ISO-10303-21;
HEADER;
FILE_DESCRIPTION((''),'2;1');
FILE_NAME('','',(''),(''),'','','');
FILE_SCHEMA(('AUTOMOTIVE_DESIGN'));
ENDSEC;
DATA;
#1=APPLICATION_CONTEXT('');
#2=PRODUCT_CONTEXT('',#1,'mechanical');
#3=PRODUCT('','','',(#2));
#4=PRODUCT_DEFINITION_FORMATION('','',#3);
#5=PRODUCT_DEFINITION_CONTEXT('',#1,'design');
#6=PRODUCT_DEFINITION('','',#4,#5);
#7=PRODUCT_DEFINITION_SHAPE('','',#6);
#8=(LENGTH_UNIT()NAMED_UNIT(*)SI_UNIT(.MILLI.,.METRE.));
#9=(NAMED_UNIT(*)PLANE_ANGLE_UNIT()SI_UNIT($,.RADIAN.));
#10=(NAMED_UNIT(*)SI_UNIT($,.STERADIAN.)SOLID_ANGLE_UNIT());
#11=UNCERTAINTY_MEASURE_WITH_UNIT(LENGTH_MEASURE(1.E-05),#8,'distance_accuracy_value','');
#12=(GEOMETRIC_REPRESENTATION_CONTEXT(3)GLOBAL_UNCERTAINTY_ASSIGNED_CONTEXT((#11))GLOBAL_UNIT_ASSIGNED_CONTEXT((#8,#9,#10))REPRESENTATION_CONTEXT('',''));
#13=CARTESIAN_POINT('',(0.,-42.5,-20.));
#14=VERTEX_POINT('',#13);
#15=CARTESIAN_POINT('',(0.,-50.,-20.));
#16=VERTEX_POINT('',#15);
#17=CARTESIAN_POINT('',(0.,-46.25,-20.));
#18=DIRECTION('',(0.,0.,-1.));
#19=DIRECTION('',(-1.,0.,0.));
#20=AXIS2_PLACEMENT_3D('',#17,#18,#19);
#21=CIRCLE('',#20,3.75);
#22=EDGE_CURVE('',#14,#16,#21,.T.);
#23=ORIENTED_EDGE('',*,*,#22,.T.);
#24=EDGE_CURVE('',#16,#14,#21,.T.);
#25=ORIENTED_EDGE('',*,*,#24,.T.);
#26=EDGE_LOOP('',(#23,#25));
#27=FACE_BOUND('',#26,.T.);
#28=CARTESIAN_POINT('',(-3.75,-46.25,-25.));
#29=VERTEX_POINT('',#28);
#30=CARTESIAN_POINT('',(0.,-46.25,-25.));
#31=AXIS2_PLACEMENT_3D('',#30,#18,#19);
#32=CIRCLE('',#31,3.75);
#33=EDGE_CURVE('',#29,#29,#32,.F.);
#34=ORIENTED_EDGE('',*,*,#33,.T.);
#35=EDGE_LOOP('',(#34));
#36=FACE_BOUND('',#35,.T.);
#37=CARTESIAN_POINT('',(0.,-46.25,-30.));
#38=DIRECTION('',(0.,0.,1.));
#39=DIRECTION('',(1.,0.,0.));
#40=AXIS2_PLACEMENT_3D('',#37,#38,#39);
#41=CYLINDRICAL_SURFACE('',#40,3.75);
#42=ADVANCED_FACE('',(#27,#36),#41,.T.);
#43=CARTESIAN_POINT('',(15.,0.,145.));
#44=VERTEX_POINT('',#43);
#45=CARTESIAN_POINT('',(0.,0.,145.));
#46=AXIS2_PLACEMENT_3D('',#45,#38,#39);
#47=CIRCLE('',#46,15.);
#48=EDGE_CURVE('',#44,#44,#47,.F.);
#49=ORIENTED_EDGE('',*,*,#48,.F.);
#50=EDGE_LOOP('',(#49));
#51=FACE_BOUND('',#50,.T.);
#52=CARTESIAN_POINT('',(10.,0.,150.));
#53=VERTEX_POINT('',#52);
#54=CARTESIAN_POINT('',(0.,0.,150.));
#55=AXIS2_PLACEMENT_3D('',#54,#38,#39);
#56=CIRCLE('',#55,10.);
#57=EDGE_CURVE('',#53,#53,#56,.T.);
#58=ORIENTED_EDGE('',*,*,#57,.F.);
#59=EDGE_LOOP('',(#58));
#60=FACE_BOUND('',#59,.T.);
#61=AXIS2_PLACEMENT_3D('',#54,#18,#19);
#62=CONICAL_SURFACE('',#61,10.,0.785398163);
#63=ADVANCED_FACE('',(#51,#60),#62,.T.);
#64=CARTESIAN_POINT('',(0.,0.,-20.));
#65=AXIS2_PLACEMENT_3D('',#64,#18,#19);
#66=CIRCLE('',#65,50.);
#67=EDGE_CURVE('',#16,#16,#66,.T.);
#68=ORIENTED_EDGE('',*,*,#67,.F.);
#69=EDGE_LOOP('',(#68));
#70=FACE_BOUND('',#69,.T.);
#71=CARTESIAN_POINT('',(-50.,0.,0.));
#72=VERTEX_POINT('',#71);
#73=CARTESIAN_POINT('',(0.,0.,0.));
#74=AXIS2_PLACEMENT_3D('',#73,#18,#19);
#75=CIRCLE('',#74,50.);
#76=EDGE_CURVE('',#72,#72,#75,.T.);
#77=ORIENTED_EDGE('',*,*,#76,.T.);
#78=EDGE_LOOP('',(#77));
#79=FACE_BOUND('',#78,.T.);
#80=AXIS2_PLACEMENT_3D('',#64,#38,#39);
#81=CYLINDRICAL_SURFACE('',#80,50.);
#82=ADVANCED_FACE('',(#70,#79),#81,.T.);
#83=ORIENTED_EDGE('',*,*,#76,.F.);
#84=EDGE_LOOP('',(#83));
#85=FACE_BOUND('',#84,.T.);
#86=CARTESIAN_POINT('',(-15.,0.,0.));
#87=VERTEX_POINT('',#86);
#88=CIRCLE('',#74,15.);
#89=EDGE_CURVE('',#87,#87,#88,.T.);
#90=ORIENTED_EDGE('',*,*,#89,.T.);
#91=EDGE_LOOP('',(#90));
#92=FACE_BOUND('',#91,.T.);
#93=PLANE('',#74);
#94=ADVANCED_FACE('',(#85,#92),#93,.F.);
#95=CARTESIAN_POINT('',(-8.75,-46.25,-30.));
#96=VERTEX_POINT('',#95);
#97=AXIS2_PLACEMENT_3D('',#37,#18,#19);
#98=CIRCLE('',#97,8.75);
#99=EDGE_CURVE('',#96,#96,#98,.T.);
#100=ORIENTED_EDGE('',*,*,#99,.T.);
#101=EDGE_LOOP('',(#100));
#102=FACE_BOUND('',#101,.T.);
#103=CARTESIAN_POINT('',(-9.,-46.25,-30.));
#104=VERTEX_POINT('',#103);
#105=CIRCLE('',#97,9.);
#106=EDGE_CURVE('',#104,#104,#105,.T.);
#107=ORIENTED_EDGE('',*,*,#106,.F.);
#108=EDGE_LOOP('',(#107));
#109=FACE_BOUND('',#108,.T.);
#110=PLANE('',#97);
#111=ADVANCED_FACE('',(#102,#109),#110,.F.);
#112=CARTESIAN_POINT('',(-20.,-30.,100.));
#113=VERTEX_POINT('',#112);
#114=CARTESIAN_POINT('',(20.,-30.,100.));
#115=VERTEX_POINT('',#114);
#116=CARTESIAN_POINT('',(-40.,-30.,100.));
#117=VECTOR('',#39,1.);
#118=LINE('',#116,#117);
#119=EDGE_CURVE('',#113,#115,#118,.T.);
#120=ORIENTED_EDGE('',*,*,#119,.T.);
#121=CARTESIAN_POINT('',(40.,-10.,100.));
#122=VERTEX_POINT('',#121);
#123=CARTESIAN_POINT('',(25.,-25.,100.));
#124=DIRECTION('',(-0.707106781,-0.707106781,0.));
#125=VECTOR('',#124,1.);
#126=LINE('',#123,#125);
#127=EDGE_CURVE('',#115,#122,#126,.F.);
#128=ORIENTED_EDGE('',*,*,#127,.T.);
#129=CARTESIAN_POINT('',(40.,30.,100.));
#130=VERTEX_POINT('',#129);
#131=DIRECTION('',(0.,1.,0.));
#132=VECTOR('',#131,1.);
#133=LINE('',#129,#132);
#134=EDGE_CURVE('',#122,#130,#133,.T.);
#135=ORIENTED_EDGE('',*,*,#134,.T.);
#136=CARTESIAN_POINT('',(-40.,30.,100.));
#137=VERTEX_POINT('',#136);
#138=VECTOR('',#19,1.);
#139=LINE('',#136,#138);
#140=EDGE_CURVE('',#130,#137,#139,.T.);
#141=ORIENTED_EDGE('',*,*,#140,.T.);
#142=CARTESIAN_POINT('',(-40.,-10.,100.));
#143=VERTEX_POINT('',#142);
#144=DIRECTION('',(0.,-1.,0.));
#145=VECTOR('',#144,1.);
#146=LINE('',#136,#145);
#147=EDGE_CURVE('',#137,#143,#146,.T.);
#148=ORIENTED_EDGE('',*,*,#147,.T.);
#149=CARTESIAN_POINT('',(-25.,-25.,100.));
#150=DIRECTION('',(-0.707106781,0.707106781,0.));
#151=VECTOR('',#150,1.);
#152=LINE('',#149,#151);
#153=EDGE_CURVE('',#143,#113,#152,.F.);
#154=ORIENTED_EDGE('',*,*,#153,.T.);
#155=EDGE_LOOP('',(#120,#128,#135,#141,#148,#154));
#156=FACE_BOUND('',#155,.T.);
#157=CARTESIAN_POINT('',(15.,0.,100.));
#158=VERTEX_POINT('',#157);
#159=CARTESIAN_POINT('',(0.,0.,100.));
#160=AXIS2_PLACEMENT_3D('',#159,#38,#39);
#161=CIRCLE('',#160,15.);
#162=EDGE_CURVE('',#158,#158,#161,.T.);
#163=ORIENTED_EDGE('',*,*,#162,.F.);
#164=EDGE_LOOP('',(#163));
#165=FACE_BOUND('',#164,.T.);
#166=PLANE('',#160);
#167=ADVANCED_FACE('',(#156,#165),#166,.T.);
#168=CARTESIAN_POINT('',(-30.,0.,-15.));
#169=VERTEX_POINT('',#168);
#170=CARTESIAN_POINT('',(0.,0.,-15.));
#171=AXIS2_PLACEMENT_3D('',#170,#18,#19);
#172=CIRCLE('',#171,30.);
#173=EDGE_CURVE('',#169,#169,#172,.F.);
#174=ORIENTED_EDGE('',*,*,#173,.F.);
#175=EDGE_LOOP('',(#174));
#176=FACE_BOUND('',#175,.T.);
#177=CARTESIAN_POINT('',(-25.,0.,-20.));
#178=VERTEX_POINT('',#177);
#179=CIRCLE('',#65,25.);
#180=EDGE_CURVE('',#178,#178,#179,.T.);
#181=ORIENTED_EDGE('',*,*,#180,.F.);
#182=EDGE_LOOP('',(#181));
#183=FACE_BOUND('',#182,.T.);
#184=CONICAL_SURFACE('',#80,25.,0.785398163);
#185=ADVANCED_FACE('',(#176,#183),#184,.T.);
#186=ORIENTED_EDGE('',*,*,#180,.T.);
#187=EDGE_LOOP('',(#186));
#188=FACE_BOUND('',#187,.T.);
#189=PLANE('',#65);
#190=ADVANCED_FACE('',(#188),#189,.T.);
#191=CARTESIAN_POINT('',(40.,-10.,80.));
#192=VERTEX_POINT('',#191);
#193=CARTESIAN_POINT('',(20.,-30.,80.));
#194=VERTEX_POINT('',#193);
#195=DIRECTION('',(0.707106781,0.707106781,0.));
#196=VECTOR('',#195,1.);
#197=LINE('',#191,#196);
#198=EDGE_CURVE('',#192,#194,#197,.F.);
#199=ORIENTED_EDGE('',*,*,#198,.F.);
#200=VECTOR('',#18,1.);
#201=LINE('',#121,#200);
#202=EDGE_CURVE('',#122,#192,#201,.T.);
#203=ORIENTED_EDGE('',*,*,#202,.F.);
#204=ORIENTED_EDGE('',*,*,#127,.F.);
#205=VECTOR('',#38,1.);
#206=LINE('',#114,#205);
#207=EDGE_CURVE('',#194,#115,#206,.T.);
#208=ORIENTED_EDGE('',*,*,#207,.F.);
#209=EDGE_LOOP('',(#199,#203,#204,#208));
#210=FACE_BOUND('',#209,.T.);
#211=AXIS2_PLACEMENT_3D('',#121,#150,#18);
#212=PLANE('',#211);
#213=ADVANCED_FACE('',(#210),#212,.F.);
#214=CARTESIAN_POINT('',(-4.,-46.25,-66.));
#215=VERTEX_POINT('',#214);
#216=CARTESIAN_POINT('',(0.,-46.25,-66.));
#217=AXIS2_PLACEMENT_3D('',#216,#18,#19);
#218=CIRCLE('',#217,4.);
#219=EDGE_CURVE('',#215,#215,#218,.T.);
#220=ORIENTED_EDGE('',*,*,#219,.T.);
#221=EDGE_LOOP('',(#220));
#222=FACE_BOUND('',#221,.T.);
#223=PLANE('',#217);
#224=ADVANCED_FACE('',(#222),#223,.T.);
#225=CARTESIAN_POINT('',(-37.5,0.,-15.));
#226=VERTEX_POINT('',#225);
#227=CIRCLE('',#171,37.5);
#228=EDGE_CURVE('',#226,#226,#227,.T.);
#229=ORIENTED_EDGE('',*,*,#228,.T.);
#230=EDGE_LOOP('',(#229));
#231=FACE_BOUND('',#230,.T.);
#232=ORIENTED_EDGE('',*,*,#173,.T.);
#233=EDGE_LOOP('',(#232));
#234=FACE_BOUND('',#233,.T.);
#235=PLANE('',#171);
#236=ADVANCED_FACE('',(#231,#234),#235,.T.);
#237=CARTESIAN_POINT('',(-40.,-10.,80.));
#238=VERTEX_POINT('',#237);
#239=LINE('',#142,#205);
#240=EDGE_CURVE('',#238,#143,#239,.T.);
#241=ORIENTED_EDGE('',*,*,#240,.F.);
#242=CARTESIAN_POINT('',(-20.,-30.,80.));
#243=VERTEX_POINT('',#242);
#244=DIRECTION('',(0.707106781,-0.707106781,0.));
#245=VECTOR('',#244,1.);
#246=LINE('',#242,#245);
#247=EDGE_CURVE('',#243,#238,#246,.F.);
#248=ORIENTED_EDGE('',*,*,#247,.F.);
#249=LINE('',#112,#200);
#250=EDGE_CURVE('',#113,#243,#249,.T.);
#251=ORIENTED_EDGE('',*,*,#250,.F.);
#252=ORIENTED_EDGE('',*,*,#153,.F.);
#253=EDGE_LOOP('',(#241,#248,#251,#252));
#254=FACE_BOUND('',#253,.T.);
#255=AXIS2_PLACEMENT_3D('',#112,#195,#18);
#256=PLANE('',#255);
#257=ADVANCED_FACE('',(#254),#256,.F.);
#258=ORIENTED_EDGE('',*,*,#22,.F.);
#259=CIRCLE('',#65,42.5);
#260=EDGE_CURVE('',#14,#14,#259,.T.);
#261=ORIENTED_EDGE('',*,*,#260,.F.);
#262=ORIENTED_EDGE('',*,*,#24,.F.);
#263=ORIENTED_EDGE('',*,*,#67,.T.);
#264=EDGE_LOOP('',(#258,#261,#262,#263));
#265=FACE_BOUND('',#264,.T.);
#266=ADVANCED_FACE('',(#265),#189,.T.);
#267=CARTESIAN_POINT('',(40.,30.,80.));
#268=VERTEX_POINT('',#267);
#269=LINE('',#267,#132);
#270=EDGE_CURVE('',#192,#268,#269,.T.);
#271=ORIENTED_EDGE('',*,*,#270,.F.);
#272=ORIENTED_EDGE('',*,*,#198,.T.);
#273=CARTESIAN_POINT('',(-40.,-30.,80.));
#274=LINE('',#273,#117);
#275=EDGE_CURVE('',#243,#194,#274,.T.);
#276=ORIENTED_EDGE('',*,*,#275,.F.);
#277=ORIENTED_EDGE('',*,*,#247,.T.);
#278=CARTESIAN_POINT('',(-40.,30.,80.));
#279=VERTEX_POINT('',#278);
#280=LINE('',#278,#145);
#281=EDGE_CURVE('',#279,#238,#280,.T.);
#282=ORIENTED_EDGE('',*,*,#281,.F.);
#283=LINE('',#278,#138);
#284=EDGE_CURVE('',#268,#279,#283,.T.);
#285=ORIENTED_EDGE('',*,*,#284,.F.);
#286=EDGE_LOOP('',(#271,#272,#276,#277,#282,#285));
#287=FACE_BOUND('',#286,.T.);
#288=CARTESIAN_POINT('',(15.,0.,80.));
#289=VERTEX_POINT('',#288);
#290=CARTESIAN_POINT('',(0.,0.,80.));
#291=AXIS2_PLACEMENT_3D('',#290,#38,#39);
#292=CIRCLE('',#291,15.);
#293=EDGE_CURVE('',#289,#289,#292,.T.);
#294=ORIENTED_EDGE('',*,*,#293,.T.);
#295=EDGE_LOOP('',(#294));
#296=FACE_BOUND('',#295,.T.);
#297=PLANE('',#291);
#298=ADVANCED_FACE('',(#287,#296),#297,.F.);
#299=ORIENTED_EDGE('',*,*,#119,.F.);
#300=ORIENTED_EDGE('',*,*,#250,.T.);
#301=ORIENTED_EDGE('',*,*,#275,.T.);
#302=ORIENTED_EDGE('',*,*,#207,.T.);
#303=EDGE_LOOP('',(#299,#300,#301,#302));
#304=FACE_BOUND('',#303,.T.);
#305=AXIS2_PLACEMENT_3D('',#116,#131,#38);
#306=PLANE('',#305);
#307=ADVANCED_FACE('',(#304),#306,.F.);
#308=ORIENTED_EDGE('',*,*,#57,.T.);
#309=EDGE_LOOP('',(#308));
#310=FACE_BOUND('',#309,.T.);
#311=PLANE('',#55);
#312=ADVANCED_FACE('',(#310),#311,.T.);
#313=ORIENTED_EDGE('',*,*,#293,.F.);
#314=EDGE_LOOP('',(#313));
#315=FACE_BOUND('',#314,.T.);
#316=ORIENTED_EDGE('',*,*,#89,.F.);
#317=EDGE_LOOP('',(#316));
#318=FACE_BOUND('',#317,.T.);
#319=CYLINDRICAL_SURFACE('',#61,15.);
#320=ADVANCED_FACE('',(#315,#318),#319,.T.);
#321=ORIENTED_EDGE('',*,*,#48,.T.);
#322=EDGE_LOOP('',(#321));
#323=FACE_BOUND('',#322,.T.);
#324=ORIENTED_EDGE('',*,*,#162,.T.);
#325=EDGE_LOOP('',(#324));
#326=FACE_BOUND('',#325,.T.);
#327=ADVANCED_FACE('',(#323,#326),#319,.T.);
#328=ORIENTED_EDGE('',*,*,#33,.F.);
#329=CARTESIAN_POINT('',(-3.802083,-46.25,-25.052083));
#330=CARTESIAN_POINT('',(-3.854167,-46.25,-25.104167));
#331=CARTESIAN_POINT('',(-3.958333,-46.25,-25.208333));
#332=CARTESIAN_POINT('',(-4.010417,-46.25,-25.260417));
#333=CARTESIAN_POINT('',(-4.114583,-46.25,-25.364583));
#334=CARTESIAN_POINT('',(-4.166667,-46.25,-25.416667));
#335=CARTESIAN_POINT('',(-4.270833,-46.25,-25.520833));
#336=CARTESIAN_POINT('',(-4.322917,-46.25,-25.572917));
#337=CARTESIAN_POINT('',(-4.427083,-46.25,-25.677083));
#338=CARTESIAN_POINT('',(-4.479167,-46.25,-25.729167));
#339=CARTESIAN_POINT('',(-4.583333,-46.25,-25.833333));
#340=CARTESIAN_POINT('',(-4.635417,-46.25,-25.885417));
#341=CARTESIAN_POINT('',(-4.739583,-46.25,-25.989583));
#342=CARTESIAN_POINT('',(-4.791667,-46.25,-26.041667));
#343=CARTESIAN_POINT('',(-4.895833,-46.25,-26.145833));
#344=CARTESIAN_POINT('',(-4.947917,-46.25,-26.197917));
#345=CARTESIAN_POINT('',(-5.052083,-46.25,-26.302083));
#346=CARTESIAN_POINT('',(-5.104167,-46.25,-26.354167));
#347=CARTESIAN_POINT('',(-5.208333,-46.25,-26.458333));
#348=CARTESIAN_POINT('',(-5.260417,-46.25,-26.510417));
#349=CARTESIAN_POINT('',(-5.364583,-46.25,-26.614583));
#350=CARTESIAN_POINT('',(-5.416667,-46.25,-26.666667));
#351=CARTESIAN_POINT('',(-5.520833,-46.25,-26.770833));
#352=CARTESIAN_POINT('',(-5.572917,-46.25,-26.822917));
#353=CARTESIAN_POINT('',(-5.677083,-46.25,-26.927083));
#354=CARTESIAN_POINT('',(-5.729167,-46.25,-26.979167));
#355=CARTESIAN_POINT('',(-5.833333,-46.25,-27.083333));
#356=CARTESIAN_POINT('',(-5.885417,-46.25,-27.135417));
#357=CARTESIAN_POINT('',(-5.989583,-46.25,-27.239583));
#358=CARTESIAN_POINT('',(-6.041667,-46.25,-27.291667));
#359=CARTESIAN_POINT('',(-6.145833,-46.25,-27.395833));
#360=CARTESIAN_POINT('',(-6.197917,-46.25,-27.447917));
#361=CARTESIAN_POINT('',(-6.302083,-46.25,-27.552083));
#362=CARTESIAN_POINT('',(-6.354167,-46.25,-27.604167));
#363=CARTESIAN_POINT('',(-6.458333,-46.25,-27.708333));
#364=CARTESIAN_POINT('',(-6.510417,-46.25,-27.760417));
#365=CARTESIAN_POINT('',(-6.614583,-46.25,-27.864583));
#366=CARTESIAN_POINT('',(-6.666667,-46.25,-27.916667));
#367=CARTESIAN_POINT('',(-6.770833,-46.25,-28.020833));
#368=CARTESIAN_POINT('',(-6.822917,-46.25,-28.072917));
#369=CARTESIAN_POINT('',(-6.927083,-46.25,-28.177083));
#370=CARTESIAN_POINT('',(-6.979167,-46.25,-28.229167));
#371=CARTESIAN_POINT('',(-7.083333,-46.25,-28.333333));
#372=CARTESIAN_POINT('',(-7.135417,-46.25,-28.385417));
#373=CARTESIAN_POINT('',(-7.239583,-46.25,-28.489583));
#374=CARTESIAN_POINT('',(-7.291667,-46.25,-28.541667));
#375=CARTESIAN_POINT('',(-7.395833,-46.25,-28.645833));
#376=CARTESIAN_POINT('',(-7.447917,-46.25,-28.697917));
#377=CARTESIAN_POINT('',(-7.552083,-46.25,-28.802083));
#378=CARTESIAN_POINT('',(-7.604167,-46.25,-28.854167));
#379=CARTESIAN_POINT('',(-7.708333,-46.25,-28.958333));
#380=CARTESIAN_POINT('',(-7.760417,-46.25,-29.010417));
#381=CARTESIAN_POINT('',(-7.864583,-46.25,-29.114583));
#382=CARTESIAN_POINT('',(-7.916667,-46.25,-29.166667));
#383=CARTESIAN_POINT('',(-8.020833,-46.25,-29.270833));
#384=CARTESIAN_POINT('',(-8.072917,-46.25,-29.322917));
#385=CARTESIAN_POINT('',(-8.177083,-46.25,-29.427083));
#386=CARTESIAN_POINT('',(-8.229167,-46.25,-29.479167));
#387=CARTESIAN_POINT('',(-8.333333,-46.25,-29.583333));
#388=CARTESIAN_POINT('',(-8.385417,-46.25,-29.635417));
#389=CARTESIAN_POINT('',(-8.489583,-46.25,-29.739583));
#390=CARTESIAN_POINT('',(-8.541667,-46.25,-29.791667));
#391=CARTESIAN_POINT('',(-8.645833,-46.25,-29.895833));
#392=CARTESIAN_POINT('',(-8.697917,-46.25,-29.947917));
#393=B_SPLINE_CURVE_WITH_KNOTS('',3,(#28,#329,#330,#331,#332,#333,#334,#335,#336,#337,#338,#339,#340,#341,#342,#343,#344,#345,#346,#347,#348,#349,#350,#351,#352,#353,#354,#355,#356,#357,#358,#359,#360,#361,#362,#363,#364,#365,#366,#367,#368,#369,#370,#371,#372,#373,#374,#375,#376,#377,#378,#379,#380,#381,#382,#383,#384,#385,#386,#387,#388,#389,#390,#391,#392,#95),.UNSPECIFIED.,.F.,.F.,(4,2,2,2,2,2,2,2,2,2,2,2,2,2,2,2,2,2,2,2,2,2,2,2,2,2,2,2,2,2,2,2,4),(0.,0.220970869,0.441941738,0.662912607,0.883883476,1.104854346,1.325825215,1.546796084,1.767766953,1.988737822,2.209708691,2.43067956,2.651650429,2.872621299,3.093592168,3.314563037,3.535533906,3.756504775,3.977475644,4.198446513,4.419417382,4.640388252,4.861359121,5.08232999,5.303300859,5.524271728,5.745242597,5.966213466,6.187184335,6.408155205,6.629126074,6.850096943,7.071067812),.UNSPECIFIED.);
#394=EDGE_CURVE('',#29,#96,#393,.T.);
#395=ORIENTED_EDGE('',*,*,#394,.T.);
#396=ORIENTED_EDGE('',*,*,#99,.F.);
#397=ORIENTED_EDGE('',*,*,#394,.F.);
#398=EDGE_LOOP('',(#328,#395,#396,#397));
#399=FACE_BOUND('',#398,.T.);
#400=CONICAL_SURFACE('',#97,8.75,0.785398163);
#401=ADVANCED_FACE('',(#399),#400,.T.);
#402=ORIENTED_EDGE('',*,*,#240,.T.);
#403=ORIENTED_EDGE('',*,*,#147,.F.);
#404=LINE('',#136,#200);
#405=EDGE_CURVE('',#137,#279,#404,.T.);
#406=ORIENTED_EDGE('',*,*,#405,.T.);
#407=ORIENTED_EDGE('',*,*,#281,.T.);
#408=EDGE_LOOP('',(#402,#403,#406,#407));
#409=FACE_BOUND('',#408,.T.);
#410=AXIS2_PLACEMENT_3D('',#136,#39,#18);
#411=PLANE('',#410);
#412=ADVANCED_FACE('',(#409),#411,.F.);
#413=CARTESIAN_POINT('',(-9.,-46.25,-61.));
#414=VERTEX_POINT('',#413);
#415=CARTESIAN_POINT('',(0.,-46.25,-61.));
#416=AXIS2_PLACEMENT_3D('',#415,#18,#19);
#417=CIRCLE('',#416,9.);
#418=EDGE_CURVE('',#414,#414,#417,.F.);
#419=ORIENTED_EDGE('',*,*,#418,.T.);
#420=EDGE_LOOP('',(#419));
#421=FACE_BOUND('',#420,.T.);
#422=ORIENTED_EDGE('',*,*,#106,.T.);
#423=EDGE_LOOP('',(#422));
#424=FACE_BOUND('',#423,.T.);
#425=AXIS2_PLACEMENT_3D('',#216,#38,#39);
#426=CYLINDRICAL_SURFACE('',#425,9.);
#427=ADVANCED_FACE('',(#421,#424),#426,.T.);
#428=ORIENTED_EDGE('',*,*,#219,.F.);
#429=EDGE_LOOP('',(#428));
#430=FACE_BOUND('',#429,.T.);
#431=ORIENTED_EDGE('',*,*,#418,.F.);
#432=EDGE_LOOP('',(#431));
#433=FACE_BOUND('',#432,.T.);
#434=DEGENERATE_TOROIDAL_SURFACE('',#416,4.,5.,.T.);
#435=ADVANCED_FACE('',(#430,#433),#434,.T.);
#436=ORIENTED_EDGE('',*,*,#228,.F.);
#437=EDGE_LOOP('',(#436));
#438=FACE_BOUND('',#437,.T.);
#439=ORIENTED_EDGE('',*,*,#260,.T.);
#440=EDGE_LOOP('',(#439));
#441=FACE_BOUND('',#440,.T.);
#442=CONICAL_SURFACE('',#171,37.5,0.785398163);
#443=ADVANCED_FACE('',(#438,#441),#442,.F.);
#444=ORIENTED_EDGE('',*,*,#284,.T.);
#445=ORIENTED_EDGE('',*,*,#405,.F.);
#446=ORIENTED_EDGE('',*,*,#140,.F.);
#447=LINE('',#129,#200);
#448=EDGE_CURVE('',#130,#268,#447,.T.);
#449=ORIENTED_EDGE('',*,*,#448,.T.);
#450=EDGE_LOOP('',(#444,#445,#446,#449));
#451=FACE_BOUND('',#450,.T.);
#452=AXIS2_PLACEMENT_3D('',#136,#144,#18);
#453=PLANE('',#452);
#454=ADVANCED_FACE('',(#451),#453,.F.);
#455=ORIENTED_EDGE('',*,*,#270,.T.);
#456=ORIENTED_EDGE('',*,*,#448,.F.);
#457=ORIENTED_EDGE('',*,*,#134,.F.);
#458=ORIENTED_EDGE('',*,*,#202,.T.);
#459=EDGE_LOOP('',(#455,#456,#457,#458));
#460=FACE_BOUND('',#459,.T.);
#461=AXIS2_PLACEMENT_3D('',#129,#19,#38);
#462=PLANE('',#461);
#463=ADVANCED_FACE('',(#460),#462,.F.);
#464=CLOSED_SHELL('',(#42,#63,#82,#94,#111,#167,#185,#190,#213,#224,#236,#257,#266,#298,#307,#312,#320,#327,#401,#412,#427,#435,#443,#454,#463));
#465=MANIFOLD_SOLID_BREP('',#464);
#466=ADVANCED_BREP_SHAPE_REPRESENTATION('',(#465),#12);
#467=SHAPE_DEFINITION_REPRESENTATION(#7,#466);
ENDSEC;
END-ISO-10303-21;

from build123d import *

# Parameters (mm, degrees)
SKETCH_1_R          = 15
EXTRUDE_1_DEPTH     = 150
SKETCH_2_R          = 50
EXTRUDE_2_DEPTH     = 20
SKETCH_3_R          = 42.5
SKETCH_3_R_2        = 25
CUT_EXTRUDE_1_DEPTH = 5
CHAMFER_1_SIZE      = 5
SKETCH_4_R          = 3.75
EXTRUDE_3_DEPTH     = 10
SKETCH_5_R          = 9
EXTRUDE_4_DEPTH     = 36
FILLET_2_R          = 5
CHAMFER_2_SIZE      = 5
CHAMFER_3_SIZE      = 5
SKETCH_6_W          = 80
SKETCH_6_H          = 60
EXTRUDE_5_DEPTH     = 20
CHAMFER_4_SIZE      = 20


with BuildPart() as part:
    # 草图1 → 凸台-拉伸1 (new body)
    with BuildSketch(Plane.XY):
        Circle(SKETCH_1_R)
    extrude(amount=EXTRUDE_1_DEPTH)

    # 草图2 → 凸台-拉伸2 (add)
    with BuildSketch(Plane(origin=(0, 0, 0), x_dir=(-1, 0, 0), z_dir=(0, 0, -1))):
        Circle(SKETCH_2_R)
    extrude(amount=EXTRUDE_2_DEPTH)

    # 草图3 → 切除-拉伸1 (cut)
    with BuildSketch(Plane(origin=(0, 0, -20), x_dir=(-1, 0, 0), z_dir=(0, 0, -1))):
        Circle(SKETCH_3_R)
        Circle(SKETCH_3_R_2, mode=Mode.SUBTRACT)
    extrude(amount=-CUT_EXTRUDE_1_DEPTH, mode=Mode.SUBTRACT)

    # 倒角1
    chamfer_1_edges = [part.edges().sort_by_distance(p)[0] for p in [
        (42.5, 0, -15),
        (25, 0, -15),
    ]]
    chamfer(chamfer_1_edges, length=CHAMFER_1_SIZE - 0.0001)  # a hair under: the kernel refuses the full size

    # 草图4 → 凸台-拉伸3 (add)
    with BuildSketch(Plane(origin=(0, 0, -20), x_dir=(-1, 0, 0), z_dir=(0, 0, -1))):
        with Locations(Location((0, -46.25, 0), (0, 0, 269.999564815))):
            Circle(SKETCH_4_R)
    extrude(amount=EXTRUDE_3_DEPTH)

    # 草图5 → 凸台-拉伸4 (add)
    with BuildSketch(Plane(origin=(0, 0, -30), x_dir=(-1, 0, 0), z_dir=(0, 0, -1))):
        with Locations((0, -46.25)):
            Circle(SKETCH_5_R)
    extrude(amount=EXTRUDE_4_DEPTH)

    # 圆角2
    fillet_2_edges = [part.edges().sort_by_distance(p)[0] for p in [
        (9, -46.25, -66),
    ]]
    fillet(fillet_2_edges, radius=FILLET_2_R)

    # 倒角2
    chamfer_2_edges = [part.edges().sort_by_distance(p)[0] for p in [
        (-2.8483e-05, -42.5, -30),
    ]]
    chamfer(chamfer_2_edges, length=CHAMFER_2_SIZE)

    # 倒角3
    chamfer_3_edges = [part.edges().sort_by_distance(p)[0] for p in [
        (-15, 0, 150),
    ]]
    chamfer(chamfer_3_edges, length=CHAMFER_3_SIZE)

    # 草图6 → 凸台-拉伸5 (add)
    with BuildSketch(Plane.XY.offset(80)):
        Rectangle(SKETCH_6_W, SKETCH_6_H)
    extrude(amount=EXTRUDE_5_DEPTH)

    # 倒角4
    chamfer_4_edges = [part.edges().sort_by_distance(p)[0] for p in [
        (40, -30, 90),
        (-40, -30, 90),
    ]]
    chamfer(chamfer_4_edges, length=CHAMFER_4_SIZE)


solid = part.part
